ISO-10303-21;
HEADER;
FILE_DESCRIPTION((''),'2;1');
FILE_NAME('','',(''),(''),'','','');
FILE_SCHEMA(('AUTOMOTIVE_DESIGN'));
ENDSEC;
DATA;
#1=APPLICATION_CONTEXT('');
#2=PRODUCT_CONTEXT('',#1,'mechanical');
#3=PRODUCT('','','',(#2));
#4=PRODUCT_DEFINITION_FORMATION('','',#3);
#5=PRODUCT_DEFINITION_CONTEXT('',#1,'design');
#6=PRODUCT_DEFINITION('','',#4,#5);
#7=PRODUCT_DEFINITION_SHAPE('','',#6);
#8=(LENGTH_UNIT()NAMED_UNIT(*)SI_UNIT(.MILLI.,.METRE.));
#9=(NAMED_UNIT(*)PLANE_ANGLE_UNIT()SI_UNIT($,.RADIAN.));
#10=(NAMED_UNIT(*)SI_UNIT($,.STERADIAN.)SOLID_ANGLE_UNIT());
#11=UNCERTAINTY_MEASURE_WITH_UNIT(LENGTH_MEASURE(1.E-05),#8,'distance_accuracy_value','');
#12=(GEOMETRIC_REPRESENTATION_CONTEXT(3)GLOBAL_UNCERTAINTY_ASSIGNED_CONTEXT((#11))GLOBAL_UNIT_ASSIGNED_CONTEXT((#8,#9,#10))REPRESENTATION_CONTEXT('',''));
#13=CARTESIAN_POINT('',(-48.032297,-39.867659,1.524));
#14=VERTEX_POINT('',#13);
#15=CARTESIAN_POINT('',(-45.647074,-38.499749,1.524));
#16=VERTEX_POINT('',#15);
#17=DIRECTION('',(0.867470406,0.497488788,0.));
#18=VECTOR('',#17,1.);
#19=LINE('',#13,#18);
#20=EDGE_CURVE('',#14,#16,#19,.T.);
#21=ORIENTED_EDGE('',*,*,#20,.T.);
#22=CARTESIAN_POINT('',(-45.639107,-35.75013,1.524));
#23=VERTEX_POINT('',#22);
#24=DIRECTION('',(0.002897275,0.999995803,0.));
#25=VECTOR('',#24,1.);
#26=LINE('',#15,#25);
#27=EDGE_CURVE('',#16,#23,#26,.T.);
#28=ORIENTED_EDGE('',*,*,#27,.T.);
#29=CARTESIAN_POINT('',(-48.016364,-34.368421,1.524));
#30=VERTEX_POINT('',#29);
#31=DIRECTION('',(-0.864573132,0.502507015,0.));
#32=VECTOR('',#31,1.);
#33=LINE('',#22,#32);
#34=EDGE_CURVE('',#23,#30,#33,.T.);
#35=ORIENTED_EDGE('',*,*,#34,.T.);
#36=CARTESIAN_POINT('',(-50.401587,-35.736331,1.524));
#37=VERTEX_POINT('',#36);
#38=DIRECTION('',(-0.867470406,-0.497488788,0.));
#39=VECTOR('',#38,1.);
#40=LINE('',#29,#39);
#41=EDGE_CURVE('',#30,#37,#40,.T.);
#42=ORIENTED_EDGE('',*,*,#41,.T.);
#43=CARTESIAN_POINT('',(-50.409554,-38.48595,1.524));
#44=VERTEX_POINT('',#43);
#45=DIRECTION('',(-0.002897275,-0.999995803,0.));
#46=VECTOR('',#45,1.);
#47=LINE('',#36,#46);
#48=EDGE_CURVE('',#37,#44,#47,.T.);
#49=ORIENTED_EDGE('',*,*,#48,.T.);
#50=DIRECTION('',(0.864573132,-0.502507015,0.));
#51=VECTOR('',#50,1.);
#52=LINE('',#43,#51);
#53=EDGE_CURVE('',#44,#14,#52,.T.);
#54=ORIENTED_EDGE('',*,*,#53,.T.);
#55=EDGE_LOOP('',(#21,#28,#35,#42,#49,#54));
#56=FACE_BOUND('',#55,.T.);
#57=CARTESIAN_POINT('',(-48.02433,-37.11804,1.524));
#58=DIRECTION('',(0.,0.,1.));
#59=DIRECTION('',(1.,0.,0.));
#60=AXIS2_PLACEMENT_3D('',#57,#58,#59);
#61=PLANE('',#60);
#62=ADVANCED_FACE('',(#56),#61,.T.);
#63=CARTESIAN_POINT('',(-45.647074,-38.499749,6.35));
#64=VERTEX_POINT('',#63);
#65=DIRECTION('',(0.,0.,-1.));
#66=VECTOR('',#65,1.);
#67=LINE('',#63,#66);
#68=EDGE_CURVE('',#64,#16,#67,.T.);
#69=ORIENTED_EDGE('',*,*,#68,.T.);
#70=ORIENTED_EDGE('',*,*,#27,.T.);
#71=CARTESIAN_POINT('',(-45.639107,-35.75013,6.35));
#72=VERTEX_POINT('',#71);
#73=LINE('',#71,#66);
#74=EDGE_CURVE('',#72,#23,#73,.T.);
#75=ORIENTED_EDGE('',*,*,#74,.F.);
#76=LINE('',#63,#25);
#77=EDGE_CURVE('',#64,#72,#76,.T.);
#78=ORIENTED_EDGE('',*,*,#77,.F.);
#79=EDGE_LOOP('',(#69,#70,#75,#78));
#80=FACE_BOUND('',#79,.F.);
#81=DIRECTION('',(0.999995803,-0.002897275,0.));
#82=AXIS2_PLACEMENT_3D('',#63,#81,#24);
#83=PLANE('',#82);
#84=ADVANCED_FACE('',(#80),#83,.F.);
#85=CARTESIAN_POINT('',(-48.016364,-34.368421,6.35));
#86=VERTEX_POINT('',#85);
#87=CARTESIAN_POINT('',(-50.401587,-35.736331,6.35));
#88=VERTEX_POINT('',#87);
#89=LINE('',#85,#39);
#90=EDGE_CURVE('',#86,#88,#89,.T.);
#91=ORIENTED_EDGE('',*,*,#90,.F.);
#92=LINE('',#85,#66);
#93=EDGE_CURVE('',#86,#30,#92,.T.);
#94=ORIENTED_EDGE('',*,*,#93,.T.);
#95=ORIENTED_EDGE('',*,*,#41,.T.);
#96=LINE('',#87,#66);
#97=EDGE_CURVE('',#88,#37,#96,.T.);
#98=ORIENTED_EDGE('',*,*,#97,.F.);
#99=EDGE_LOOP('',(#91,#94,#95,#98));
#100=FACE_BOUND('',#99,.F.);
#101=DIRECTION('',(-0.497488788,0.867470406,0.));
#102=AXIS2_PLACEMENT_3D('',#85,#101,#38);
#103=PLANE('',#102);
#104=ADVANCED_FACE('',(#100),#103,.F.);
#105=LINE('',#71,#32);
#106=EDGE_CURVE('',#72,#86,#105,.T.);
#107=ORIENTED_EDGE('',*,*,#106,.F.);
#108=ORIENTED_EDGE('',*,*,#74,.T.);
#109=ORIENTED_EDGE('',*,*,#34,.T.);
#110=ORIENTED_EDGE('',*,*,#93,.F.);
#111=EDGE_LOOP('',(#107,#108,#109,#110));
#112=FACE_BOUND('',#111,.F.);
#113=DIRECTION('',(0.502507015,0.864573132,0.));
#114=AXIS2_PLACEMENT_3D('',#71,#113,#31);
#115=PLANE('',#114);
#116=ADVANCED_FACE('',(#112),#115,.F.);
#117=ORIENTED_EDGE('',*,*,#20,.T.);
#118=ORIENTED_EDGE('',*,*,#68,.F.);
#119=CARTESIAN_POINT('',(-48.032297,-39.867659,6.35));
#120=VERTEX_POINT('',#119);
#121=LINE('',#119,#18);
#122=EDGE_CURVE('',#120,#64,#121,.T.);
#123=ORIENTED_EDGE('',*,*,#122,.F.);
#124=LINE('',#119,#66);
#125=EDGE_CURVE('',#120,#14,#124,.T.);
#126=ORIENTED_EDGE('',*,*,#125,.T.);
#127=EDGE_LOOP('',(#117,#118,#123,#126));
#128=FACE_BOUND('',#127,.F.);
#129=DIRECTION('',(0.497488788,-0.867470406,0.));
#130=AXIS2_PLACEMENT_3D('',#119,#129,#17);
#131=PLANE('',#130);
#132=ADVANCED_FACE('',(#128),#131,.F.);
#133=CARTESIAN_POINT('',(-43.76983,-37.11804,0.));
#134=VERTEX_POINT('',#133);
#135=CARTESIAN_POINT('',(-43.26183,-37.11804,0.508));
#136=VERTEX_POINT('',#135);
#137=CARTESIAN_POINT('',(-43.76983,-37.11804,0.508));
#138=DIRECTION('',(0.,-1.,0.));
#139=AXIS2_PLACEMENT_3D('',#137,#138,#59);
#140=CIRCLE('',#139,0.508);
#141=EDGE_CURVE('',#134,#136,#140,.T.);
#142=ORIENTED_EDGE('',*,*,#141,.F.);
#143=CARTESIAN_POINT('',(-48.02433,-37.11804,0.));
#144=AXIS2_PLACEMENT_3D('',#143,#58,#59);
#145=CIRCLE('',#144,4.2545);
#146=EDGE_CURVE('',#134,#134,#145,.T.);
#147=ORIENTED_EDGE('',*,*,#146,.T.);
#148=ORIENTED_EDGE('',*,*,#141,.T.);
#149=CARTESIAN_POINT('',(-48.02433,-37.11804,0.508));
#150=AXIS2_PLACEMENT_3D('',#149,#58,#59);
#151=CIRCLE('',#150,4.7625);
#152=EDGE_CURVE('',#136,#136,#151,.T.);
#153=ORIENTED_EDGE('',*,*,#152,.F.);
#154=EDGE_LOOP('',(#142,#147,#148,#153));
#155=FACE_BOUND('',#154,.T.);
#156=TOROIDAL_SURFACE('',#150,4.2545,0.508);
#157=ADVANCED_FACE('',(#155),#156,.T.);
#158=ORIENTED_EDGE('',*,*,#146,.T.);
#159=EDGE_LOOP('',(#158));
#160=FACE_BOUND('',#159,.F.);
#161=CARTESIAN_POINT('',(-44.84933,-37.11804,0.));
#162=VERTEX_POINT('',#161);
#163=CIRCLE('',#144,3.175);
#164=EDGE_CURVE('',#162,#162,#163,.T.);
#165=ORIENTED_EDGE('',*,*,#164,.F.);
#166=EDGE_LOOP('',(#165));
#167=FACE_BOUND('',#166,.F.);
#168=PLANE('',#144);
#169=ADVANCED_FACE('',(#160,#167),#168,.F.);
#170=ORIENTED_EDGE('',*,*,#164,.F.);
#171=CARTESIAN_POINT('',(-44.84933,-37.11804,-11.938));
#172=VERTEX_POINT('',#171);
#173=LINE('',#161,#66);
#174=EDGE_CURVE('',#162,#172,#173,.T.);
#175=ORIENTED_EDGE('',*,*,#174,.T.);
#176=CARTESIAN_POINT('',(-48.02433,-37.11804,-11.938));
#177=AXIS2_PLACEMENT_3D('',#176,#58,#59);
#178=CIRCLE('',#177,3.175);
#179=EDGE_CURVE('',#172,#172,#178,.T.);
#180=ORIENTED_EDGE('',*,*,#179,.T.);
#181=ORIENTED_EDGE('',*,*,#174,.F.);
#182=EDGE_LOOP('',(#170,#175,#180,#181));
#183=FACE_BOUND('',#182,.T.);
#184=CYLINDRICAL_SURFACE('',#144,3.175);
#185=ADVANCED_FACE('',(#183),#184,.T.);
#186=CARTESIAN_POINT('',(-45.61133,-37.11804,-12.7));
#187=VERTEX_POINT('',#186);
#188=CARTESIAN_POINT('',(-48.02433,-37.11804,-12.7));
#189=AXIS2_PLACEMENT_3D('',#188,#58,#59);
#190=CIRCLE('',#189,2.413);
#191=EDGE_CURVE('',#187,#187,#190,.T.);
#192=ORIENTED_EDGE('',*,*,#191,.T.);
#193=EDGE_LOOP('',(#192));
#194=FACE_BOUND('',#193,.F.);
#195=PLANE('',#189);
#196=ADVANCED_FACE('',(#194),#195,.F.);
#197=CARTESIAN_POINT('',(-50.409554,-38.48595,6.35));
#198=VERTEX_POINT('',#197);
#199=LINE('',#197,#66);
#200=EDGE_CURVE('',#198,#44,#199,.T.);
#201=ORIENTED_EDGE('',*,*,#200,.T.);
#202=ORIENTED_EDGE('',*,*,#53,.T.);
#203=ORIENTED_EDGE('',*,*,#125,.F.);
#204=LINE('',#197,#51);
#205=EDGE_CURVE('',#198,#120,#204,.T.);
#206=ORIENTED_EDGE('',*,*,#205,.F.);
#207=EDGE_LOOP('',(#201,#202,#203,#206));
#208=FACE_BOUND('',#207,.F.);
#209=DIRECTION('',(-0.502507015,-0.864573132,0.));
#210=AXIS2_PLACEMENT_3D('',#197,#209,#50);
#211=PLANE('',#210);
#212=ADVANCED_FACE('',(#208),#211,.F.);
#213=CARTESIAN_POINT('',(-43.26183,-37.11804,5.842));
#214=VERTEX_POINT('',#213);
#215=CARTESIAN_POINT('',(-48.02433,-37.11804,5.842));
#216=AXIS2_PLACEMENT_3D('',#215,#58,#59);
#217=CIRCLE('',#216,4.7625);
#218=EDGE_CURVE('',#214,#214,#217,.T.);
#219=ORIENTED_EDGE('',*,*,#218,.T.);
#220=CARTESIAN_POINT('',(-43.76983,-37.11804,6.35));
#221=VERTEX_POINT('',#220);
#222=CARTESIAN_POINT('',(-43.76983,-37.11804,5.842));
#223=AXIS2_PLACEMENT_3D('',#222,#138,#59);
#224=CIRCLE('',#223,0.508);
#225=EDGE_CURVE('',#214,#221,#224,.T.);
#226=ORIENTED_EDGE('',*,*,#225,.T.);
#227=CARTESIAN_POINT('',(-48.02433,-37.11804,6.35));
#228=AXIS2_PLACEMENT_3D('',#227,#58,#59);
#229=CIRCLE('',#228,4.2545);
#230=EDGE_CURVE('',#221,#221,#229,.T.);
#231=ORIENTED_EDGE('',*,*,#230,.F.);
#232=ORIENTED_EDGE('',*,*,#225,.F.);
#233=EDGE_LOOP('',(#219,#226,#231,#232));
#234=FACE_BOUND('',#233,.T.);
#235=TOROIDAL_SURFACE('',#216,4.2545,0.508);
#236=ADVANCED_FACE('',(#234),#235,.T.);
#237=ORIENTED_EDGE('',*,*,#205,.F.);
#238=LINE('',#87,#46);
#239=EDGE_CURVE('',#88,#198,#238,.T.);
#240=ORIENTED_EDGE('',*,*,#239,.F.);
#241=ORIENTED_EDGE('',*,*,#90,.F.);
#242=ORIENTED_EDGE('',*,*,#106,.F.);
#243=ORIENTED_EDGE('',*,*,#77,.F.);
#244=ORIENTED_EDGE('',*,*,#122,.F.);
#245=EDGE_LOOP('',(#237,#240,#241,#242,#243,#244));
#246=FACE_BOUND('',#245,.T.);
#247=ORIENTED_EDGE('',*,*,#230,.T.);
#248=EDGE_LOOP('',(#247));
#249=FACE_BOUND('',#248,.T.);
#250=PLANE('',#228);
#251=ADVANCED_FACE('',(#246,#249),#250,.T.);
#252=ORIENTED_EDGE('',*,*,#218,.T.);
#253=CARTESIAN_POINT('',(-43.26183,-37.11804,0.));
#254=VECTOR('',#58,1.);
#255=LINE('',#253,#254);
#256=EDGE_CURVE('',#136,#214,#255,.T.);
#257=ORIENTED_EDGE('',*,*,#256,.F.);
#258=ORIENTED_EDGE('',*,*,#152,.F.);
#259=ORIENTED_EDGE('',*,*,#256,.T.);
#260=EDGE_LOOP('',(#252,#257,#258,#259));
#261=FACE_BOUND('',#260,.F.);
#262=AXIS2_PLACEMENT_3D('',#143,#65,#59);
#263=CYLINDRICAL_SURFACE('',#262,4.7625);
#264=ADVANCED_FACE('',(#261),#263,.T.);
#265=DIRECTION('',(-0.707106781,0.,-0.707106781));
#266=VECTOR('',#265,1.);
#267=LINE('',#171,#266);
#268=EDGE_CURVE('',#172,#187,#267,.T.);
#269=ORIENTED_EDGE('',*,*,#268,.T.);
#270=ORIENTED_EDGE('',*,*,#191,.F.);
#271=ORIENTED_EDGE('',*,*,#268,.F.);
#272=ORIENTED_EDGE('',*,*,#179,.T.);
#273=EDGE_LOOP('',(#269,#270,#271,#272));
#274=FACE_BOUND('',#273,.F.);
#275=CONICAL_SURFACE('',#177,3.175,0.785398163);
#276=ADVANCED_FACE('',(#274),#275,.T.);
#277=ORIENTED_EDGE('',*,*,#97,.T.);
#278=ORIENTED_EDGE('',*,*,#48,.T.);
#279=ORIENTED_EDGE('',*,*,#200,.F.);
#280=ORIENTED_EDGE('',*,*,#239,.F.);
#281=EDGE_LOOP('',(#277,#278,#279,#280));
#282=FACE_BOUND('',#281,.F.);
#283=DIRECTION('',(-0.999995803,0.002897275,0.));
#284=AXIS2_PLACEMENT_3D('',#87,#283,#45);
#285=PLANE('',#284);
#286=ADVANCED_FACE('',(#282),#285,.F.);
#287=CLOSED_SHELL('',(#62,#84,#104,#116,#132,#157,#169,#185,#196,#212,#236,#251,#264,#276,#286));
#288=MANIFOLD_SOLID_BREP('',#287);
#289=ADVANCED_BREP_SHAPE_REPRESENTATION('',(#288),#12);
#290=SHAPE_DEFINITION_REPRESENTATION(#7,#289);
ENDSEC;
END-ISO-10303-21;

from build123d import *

# Parameters (mm, degrees)
F0_R     = 3.175
F1_DEPTH = 12.7
F2_R     = 4.7625
F2_R_2   = 3.175
F3_DEPTH = 6.35
F5_DEPTH = 4.826
F6_SIZE2 = 0.762
F6_SIZE  = 0.762
F10_R    = 0.508


# Not quite as in the source:
# - the program builds the solid bodies; features that only make, move or delete a surface that nothing else refers to are left out


with BuildPart() as f1:
    # F0 (on Top) → F1 (new body)
    with BuildSketch(Plane.XY):
        with Locations((-48.0243302882, -37.1180400252)):
            Circle(F0_R)
    extrude(amount=-F1_DEPTH)

    # F2 (on Top) → F3 (join)
    with BuildSketch(Plane.XY):
        with Locations((-48.0243302882, -37.1180400252)):
            Circle(F2_R)
        with Locations((-48.0243302882, -37.1180400252)):
            Circle(F2_R_2, mode=Mode.SUBTRACT)
        with Locations((-48.0243302882, -37.1180400252)):
            Circle(F2_R_2)
    extrude(amount=F3_DEPTH)

    # F4 (on face) → F5 (cut)
    with BuildSketch(Plane.XY.offset(6.35)):
        Polygon((-48.016363853, -34.3684209087), (-50.4015870762, -35.7363313317), (-50.4095535114, -38.4859504482), (-48.0322967234, -39.8676591418), (-45.6470735001, -38.4997487188), (-45.6391070649, -35.7501296023), align=None)
    extrude(amount=-F5_DEPTH, mode=Mode.SUBTRACT)

    # F6
    f6_edges = [f1.edges().sort_by_distance(p)[0] for p in [
        (-51.19933, -37.11804, -12.7),
    ]]
    chamfer(f6_edges, length=F6_SIZE, length2=F6_SIZE2)

    # F10
    f10_edges = [f1.edges().sort_by_distance(p)[0] for p in [
        (-52.78683, -37.11804, 0),
        (-52.78683, -37.11804, 6.35),
    ]]
    fillet(f10_edges, radius=F10_R)


solid = f1.part
